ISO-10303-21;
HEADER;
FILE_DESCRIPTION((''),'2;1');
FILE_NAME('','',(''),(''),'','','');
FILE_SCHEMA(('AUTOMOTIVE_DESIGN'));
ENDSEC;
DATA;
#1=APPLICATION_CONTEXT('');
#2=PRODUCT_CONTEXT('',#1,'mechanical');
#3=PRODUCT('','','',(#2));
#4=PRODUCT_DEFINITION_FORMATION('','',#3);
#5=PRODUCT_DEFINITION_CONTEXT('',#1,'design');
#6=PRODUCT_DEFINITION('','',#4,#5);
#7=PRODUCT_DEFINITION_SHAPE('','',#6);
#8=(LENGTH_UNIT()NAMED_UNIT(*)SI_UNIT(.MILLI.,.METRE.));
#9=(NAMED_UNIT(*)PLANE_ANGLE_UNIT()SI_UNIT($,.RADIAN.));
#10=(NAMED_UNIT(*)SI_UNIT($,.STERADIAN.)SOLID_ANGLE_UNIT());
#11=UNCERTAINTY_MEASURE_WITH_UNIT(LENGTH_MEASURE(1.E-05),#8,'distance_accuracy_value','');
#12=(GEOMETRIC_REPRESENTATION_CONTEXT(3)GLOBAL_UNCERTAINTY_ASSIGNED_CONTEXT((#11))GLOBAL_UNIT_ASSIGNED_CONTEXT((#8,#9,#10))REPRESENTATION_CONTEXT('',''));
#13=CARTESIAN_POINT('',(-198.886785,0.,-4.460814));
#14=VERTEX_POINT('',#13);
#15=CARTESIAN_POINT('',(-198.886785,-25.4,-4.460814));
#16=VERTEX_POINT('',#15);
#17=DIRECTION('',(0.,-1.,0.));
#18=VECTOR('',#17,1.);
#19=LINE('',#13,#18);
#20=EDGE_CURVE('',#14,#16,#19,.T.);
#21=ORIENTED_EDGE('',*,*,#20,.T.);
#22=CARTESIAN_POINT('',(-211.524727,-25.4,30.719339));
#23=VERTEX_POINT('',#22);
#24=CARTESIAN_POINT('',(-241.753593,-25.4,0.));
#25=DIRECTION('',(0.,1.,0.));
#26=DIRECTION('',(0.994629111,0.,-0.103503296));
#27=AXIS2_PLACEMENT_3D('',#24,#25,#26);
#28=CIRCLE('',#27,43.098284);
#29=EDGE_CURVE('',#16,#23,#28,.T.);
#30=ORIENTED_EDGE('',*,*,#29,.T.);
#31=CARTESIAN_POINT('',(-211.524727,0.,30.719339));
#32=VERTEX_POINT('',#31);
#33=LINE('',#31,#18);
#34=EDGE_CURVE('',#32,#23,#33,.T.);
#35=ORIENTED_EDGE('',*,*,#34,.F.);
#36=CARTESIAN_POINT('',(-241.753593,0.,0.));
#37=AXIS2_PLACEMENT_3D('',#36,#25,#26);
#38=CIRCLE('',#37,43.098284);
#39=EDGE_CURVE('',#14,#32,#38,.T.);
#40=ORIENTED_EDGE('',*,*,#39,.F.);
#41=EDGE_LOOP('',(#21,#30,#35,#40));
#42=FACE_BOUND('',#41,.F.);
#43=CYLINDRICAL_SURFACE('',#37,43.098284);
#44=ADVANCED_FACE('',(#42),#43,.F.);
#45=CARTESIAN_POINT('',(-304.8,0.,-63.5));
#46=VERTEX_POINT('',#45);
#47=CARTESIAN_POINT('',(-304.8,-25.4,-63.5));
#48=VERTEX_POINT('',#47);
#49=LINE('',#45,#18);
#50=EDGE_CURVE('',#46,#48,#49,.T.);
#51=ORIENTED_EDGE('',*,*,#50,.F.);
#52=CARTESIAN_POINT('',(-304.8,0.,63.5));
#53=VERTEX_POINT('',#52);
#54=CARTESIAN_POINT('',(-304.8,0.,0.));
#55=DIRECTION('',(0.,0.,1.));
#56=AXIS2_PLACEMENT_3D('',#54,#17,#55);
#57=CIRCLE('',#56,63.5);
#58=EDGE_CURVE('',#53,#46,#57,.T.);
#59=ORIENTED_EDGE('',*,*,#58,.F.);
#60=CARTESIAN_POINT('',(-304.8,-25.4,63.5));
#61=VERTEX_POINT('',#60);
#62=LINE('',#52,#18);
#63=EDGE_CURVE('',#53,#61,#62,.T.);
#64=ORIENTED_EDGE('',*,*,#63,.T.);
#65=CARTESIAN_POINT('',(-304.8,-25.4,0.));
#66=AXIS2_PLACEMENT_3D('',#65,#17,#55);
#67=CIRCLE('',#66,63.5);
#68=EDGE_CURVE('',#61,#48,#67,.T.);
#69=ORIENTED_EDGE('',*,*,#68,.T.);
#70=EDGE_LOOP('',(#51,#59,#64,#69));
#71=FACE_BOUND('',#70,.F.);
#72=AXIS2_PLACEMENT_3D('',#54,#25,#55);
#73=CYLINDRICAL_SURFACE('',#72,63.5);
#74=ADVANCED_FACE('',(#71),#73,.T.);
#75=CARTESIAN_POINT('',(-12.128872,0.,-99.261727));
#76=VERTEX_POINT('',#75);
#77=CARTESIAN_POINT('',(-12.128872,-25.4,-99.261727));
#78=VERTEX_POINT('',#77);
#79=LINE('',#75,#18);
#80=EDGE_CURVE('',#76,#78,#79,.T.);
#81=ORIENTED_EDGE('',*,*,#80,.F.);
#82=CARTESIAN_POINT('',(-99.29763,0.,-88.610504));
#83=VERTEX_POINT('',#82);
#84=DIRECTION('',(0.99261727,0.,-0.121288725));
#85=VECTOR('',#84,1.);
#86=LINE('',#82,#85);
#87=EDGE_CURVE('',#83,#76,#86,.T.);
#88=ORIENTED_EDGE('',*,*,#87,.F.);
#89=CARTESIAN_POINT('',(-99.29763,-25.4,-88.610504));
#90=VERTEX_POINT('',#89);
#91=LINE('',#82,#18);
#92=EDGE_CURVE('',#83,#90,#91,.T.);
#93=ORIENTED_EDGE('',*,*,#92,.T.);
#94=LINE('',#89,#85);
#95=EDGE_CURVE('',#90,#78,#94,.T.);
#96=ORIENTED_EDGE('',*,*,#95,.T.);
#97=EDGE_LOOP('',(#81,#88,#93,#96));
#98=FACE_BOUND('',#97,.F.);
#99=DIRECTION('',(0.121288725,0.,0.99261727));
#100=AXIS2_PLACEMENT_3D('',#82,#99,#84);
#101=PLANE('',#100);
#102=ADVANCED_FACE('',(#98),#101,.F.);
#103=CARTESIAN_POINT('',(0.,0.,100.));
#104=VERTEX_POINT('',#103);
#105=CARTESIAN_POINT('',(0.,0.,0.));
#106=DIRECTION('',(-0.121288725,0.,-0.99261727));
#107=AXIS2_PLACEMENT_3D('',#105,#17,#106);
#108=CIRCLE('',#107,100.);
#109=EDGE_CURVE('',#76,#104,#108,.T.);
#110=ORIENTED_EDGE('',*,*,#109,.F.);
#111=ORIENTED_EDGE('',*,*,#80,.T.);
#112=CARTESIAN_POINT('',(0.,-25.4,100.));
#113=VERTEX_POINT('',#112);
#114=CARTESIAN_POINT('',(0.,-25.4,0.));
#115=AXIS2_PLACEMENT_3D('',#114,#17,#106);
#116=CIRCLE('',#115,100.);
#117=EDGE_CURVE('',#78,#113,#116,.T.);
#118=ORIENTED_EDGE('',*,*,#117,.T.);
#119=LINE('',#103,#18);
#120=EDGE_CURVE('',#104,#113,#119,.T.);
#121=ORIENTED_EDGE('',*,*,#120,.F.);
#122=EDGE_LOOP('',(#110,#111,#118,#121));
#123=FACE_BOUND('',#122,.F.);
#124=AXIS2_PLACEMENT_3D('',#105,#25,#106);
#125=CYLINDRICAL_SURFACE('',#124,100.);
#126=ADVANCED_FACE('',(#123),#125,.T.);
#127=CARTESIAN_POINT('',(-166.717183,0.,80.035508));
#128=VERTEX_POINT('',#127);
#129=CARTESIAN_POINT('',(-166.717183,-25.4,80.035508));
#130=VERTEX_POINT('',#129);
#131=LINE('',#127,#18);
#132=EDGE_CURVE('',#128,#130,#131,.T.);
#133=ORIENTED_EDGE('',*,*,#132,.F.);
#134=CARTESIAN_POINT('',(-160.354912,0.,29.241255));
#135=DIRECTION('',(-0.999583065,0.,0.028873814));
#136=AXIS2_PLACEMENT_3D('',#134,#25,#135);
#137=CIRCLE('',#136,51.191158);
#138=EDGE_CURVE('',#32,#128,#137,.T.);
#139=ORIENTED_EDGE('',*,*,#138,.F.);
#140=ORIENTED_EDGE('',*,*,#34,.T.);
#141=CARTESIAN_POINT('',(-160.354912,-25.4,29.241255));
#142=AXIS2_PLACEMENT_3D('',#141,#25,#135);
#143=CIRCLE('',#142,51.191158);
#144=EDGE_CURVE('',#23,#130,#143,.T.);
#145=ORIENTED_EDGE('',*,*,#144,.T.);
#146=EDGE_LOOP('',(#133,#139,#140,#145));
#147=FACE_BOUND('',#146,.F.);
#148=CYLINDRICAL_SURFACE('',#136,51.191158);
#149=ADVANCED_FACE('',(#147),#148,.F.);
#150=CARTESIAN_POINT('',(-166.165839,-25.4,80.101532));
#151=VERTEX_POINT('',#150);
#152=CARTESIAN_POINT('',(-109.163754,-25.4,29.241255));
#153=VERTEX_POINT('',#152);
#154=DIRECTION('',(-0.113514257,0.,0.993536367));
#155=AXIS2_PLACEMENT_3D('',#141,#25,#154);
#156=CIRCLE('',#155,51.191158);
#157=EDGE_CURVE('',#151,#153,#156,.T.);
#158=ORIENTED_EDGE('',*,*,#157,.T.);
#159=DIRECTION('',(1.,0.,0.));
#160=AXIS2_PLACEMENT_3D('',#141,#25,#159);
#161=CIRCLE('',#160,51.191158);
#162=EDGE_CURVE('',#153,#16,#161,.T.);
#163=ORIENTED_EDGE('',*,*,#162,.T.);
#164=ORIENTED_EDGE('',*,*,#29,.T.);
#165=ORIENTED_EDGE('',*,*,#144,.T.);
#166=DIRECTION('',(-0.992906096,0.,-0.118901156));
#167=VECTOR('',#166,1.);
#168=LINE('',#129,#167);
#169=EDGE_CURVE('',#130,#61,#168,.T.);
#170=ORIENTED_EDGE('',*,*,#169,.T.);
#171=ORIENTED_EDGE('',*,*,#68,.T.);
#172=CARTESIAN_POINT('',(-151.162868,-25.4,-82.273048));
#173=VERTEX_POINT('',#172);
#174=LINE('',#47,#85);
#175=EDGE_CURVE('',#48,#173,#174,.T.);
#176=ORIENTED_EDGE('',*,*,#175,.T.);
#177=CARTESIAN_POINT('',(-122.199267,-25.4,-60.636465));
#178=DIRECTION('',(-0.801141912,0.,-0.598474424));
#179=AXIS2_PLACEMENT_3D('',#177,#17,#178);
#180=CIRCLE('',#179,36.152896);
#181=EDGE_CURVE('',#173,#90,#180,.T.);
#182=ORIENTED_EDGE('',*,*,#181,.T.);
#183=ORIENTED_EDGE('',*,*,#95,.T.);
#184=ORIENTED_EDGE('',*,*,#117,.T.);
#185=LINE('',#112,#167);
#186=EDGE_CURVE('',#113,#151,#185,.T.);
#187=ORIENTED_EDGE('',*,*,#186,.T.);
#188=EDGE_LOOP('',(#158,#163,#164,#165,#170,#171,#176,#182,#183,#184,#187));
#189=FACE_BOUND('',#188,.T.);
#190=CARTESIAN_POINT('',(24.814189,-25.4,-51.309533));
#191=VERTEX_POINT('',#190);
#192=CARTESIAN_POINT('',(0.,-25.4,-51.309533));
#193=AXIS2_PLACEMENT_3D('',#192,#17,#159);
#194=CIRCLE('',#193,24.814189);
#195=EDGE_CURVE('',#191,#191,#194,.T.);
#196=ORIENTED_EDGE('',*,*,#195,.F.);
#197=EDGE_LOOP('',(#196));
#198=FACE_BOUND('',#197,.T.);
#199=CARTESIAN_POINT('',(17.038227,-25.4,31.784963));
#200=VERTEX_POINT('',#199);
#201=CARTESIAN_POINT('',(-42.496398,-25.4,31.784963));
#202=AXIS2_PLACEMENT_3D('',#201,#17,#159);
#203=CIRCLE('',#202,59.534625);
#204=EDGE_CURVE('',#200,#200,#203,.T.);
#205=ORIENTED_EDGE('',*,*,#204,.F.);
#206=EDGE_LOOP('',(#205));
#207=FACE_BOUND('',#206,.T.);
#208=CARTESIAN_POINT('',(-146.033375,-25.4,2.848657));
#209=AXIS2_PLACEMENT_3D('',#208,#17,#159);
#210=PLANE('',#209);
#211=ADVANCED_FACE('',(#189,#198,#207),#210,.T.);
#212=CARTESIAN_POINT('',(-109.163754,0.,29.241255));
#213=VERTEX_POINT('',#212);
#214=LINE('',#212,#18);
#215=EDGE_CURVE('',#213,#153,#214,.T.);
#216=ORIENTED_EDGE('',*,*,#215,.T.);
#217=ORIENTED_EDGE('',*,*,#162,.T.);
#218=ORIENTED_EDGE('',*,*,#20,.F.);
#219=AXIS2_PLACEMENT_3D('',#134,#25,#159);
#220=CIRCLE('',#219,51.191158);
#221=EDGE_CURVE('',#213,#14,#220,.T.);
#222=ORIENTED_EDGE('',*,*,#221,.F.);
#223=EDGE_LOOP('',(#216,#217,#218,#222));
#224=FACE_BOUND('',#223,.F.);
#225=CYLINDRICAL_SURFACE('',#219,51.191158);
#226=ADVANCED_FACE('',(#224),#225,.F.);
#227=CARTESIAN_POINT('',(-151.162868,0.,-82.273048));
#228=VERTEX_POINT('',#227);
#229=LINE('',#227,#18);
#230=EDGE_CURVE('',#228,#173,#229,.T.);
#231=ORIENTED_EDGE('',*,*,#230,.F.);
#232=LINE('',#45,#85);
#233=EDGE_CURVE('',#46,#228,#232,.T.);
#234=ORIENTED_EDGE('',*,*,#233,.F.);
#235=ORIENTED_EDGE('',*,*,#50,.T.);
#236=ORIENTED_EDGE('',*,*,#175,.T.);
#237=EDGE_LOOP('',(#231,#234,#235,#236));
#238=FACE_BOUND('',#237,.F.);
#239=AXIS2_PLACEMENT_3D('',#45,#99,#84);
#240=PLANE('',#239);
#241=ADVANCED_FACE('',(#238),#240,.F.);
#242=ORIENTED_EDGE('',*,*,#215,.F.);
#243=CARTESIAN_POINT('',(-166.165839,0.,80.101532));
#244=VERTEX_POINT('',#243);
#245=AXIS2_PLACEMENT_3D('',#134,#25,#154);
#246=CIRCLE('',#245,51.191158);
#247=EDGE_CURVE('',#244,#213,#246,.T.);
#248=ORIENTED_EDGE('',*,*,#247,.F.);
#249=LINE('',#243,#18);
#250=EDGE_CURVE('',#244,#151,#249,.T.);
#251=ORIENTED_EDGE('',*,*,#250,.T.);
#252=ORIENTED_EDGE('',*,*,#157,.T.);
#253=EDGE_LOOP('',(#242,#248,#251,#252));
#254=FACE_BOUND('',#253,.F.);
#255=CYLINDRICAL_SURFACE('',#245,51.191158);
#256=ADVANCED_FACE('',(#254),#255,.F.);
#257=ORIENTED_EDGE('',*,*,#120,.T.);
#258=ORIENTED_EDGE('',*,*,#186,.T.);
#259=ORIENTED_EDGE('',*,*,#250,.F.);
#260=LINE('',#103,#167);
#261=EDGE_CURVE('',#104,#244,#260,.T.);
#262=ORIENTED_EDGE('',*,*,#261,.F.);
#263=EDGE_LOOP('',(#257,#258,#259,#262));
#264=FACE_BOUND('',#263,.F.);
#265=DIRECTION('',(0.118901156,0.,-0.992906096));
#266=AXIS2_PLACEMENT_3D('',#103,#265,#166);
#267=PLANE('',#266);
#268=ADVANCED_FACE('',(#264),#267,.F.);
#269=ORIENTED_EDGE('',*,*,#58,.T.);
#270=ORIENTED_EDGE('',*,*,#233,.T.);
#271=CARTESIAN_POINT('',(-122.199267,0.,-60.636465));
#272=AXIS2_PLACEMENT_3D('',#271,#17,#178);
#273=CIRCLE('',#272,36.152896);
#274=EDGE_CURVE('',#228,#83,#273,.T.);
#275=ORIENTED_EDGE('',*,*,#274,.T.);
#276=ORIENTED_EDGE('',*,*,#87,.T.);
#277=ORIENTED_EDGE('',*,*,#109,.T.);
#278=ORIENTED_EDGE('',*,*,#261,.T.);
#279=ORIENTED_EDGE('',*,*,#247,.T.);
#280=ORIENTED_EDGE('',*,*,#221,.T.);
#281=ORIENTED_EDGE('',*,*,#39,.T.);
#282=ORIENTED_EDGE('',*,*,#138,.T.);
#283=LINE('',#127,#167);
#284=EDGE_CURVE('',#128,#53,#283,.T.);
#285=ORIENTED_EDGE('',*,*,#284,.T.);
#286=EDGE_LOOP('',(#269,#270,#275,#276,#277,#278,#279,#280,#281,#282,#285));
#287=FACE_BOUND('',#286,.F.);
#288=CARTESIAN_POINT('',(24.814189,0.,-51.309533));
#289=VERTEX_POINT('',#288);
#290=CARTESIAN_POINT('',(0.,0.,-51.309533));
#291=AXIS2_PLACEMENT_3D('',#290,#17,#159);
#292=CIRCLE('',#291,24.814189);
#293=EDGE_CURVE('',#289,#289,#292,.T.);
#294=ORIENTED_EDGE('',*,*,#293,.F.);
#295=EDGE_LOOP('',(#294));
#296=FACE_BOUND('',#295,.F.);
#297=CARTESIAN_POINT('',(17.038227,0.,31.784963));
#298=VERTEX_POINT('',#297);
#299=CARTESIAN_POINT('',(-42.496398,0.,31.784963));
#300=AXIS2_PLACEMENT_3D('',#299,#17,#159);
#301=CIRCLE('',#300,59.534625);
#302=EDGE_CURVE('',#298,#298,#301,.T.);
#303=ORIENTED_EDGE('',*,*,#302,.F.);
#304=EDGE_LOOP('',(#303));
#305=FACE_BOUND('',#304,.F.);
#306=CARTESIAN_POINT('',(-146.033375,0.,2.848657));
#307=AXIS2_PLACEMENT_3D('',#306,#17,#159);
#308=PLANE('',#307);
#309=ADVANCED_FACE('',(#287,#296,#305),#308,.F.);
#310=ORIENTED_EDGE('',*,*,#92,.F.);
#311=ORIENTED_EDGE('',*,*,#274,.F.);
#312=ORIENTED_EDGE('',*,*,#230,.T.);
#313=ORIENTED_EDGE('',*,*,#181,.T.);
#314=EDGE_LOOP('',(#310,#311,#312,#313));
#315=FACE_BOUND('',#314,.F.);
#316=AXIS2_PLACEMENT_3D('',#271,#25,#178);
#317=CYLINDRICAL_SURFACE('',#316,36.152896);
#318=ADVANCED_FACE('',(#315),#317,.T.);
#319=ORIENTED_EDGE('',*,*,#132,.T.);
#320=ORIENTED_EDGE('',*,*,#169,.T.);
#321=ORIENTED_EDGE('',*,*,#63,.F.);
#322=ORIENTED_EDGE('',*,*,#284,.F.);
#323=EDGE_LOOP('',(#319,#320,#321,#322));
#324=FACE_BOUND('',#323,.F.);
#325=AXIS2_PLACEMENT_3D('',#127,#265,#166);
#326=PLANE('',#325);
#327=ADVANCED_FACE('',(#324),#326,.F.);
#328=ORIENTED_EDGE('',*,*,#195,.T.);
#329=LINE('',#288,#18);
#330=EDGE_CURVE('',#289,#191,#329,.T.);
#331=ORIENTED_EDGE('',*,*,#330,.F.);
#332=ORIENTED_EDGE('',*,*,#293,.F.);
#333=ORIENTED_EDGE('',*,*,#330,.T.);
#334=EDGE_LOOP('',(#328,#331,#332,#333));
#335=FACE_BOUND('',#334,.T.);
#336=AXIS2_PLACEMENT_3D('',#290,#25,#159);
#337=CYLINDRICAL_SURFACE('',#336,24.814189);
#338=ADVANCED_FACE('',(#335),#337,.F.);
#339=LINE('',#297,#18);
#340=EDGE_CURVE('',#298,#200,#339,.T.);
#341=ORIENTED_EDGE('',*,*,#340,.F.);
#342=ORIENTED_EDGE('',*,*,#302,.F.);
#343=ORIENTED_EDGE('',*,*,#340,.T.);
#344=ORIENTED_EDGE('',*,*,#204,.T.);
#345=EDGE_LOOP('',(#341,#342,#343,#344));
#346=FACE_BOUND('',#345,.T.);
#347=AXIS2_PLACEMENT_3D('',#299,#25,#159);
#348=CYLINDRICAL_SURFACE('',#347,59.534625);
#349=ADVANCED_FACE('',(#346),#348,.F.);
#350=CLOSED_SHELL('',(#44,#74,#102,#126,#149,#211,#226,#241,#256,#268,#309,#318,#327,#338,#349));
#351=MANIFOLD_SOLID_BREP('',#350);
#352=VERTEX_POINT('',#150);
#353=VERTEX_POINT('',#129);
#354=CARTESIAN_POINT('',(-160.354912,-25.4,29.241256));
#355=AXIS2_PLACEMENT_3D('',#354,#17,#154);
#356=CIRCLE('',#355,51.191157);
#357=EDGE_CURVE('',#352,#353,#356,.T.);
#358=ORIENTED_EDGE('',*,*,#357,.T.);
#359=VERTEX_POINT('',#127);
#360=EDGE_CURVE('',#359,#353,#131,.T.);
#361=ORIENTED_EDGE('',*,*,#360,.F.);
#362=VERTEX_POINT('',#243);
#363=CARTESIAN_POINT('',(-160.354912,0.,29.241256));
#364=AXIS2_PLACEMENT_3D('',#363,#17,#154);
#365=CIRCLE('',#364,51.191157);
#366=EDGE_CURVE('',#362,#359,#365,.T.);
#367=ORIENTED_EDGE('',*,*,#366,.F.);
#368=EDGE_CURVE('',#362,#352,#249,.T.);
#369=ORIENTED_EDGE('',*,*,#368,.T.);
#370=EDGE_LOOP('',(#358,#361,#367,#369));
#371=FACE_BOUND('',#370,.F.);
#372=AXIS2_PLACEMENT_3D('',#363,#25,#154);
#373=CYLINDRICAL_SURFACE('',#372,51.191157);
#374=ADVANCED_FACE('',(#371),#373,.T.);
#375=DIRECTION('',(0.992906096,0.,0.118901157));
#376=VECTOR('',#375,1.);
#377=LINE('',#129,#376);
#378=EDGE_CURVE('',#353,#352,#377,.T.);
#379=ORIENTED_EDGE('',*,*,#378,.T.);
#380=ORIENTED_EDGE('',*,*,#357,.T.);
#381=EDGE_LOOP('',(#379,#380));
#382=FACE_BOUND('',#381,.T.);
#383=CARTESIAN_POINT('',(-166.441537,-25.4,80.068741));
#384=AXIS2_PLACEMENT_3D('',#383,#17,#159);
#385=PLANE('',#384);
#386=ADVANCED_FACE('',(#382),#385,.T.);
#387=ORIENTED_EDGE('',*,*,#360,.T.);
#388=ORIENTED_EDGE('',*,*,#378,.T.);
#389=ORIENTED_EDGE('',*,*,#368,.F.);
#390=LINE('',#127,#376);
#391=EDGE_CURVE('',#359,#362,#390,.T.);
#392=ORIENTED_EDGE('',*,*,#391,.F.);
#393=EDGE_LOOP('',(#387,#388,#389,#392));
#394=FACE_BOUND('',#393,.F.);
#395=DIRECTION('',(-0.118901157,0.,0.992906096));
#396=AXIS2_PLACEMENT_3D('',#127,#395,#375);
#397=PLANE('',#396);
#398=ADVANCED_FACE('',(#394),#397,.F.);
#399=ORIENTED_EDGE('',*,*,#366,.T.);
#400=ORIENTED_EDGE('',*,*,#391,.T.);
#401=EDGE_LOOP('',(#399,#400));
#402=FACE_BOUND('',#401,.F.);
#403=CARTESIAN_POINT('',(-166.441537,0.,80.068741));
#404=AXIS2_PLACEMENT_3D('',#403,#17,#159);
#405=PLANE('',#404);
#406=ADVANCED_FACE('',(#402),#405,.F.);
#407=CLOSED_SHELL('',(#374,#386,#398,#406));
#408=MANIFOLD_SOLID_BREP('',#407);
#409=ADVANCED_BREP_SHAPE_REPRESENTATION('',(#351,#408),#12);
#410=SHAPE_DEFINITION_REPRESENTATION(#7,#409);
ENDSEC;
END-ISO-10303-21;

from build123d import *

# Parameters (mm, degrees)
F0_R     = 24.8141888618
F0_R_2   = 59.5346246142
F1_DEPTH = 25.4


with BuildPart() as f1:
    # F0 (on Front) → F1 (new body)
    with BuildSketch(Plane.XZ):
        with BuildLine():
            Line((-99.2976298759, -88.6105044971), (-12.1288724864, -99.2617270261))
            ThreePointArc((-12.1288724864, -99.2617270261), (99.8152611143, -6.0756603504), (0, 100))
            Line((0, 100), (-166.1658385565, 80.1015318002))
            ThreePointArc((-166.1658385565, 80.1015318002), (-126.2736372151, 67.4381308089), (-109.1637541986, 29.2412545532))
            ThreePointArc((-109.1637541986, 29.2412545532), (-142.3543083636, -18.6806916137), (-198.8867849114, -4.4608144844))
            ThreePointArc((-198.8867849114, -4.4608144844), (-282.3141058144, -14.5707555174), (-211.5247269524, 30.7193385549))
            ThreePointArc((-211.5247269524, 30.7193385549), (-198.2429888587, 63.6654948362), (-166.717182755, 80.0355079706))
            Line((-166.717182755, 80.0355079706), (-304.8, 63.5))
            ThreePointArc((-304.8, 63.5), (-368.3, 0), (-304.8, -63.5))
            Line((-304.8, -63.5), (-151.1628675473, -82.2730482283))
            ThreePointArc((-151.1628675473, -82.2730482283), (-133.5991325998, -26.3279382936), (-86.0463709553, -60.6364645064))
            ThreePointArc((-86.0463709553, -60.6364645064), (-89.5267066571, -76.1134052278), (-99.2976298759, -88.6105044971))
        make_face()
        with Locations((0, -51.3095334172)):
            Circle(F0_R, mode=Mode.SUBTRACT)
        with Locations((-42.4963980913, 31.7849628627)):
            Circle(F0_R_2, mode=Mode.SUBTRACT)
        with BuildLine():
            ThreePointArc((-151.1628675473, -82.2730482283), (-126.5842058284, -96.5224536382), (-99.2976298759, -88.6105044971))
            Line((-99.2976298759, -88.6105044971), (-151.1628675473, -82.2730482283))
        make_face()
        with BuildLine():
            Line((-151.1628675473, -82.2730482283), (-99.2976298759, -88.6105044971))
            ThreePointArc((-99.2976298759, -88.6105044971), (-89.5267066571, -76.1134052278), (-86.0463709553, -60.6364645064))
            ThreePointArc((-86.0463709553, -60.6364645064), (-133.5991325998, -26.3279382936), (-151.1628675473, -82.2730482283))
        make_face()
    extrude(amount=F1_DEPTH)


with BuildPart() as f1b:
    # F0 (on Front) → F1, piece 2 (new body)
    with BuildSketch(Plane.XZ):
        with BuildLine():
            Line((-166.717182755, 80.0355079706), (-166.1658385565, 80.1015318002))
            ThreePointArc((-166.1658385565, 80.1015318002), (-166.4416001786, 80.069267462), (-166.717182755, 80.0355079706))
        make_face()
    extrude(amount=F1_DEPTH)


solid = Compound([f1.part, f1b.part])
